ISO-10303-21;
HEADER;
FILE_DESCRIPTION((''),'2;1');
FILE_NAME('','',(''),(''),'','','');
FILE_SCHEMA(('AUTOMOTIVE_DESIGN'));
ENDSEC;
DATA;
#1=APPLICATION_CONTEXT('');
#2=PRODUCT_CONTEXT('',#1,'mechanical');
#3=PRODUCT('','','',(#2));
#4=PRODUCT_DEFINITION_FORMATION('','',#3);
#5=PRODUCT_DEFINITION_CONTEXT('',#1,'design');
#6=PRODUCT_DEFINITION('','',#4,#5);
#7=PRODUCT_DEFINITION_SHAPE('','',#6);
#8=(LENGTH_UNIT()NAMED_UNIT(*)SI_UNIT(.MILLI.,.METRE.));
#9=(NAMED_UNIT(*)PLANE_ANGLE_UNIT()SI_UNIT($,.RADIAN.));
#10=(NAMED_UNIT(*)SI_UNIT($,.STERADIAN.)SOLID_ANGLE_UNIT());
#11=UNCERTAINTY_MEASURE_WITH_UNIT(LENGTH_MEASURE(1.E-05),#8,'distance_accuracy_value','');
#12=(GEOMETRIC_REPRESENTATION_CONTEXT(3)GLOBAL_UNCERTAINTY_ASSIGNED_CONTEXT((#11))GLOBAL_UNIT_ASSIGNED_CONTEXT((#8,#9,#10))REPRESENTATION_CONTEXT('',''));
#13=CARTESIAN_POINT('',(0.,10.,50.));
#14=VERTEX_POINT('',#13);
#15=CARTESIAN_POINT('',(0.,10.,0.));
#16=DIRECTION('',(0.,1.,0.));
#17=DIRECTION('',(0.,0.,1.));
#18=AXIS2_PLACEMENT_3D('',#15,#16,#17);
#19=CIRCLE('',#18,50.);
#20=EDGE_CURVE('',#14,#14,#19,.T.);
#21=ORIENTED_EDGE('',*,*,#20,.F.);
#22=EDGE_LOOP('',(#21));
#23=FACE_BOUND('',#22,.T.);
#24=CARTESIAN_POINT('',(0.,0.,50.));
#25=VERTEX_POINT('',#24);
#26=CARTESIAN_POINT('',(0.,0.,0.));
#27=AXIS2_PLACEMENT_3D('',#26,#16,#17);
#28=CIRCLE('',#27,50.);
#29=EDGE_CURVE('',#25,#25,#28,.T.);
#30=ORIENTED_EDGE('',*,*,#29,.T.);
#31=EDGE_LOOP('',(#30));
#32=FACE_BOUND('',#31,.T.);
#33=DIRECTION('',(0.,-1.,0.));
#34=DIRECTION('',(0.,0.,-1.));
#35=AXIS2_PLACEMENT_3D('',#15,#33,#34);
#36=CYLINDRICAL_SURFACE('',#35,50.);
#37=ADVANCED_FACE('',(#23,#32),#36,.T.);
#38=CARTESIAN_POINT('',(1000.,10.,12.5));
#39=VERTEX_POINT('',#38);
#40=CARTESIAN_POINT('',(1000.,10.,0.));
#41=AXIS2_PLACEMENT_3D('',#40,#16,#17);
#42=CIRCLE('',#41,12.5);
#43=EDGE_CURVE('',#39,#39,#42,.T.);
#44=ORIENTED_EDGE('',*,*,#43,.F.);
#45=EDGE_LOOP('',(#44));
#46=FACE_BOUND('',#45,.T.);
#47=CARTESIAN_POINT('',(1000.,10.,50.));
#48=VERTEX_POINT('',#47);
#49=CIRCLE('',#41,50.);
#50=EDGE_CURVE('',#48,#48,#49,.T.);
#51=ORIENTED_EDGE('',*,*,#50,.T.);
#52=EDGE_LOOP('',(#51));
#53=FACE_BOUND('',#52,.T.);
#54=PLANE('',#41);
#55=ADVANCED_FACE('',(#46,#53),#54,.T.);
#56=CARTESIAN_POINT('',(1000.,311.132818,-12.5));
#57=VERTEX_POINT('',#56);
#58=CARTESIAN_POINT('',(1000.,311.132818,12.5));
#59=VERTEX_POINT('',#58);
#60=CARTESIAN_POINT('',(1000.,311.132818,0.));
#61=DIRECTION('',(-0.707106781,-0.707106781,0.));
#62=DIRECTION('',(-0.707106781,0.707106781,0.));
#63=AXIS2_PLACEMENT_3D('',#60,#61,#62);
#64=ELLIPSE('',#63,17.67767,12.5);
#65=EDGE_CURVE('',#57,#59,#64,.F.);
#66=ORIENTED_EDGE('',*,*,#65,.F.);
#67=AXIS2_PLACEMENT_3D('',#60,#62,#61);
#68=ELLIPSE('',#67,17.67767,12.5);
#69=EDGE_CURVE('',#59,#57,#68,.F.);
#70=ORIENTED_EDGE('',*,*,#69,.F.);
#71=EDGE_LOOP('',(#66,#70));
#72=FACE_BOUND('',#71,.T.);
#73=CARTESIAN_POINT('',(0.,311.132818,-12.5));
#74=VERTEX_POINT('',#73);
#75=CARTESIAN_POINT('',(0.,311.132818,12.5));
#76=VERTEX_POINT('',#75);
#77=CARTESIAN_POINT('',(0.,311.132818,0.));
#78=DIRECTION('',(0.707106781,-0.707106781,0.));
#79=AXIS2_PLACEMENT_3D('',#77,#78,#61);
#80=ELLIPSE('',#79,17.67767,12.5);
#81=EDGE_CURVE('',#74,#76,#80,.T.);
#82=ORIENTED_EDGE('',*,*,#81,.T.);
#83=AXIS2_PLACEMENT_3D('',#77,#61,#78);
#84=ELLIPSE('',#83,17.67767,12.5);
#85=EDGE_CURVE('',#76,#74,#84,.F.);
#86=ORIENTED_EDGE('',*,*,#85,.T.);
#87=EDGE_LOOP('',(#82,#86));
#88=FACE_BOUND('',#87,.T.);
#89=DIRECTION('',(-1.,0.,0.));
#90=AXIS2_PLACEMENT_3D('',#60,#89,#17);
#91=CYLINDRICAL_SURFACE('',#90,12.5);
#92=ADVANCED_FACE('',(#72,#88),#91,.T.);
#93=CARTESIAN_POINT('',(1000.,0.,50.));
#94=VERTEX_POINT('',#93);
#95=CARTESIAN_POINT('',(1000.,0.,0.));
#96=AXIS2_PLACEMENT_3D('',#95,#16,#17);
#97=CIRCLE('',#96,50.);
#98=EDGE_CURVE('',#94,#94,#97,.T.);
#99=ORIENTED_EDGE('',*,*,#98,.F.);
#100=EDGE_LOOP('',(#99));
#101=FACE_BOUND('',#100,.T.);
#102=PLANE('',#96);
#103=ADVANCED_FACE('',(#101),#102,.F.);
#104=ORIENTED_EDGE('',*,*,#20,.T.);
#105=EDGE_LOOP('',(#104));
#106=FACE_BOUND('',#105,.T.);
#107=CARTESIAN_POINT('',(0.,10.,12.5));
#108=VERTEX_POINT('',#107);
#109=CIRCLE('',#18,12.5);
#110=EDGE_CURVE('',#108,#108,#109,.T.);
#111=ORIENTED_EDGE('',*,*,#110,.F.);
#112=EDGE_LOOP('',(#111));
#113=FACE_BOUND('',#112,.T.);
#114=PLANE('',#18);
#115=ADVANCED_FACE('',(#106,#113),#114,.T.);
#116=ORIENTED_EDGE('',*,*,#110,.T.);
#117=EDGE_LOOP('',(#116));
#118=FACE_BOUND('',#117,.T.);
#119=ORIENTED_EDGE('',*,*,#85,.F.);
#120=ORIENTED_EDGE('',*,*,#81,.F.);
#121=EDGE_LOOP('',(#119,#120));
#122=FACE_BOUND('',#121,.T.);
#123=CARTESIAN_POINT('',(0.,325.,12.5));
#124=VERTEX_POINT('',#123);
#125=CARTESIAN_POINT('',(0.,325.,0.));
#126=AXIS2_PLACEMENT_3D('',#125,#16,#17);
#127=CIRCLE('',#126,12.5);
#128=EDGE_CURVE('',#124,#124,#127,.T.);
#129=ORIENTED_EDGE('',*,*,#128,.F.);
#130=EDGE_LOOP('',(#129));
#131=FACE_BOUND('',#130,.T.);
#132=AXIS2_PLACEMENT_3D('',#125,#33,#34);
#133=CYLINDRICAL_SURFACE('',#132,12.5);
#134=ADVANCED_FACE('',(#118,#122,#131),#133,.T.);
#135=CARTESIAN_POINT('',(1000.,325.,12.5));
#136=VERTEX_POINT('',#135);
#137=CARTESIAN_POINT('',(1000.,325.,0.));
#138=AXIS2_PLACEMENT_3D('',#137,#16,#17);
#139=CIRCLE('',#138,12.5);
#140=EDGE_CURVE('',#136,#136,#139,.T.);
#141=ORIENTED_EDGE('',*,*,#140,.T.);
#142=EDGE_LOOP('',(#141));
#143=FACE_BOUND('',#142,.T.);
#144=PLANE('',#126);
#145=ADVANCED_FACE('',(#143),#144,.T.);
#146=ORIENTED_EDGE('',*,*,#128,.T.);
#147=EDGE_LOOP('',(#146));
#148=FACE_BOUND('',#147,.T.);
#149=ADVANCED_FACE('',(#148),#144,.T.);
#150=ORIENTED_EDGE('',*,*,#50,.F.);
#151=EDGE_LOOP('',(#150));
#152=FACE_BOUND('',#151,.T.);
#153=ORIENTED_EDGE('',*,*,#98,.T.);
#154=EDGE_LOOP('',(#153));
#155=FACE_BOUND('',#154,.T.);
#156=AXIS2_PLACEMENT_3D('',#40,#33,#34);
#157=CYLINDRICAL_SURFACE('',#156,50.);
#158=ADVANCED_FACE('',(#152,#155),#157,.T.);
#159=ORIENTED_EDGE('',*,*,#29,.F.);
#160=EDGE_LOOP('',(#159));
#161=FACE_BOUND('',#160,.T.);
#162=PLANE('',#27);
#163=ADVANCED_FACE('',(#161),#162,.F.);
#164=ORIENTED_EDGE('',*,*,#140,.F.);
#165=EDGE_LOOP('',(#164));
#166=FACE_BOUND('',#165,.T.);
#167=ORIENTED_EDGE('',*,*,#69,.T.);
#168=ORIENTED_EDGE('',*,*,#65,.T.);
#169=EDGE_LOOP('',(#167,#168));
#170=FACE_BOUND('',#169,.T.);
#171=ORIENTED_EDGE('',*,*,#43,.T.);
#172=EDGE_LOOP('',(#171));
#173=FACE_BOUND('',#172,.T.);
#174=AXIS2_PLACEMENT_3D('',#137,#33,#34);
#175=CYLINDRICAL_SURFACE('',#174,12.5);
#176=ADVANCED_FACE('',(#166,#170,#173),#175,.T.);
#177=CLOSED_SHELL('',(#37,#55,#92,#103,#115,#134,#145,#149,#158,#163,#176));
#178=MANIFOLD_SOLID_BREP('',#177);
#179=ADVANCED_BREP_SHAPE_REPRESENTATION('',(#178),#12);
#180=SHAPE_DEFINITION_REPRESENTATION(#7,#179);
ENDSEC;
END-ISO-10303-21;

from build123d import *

# Parameters (mm, degrees)
SKETCH_1_R        = 50
EXTRUDE_1_DEPTH   = 10
EXTRUDE_1_2_DEPTH = 10
SKETCH_2_R        = 12.5
EXTRUDE_2_DEPTH   = 315
SKETCH_3_R        = 12.5
EXTRUDE_3_DEPTH   = 1000


with BuildPart() as part:
    # 草图1 → 凸台-拉伸1 (new body)
    with BuildSketch(Plane(origin=(0, 0, 0), x_dir=(1, 0, 0), z_dir=(0, 1, 0))):
        Circle(SKETCH_1_R)
    extrude(amount=EXTRUDE_1_DEPTH)



with BuildPart() as body_2:
    # 草图1 → Extrude 1 2 (new body)
    with BuildSketch(Plane(origin=(0, 0, 0), x_dir=(1, 0, 0), z_dir=(0, 1, 0))):
        with Locations((1000, 0)):
            Circle(SKETCH_1_R)
    extrude(amount=EXTRUDE_1_2_DEPTH)


with BuildPart() as part_1:
    add(part.part)

    add(body_2.part)  # 凸台-拉伸2 merges body 2
    # 草图2 → 凸台-拉伸2 (add)
    with BuildSketch(Plane(origin=(0, 10, 0), x_dir=(1, 0, 0), z_dir=(0, 1, 0))):
        Circle(SKETCH_2_R)
        with Locations((1000, 0)):
            Circle(SKETCH_2_R)
    extrude(amount=EXTRUDE_2_DEPTH)


with BuildPart() as extrude_3_tool:
    # 草图3 → 凸台-拉伸3 (new body)
    with BuildSketch(Plane(origin=(0, 0, 0), x_dir=(0, 0, -1), z_dir=(1, 0, 0))):
        with Locations((0, 311.132818199)):
            Circle(SKETCH_3_R)
    extrude(amount=EXTRUDE_3_DEPTH)


with BuildPart() as part_2:
    add(part_1.part)


with BuildPart() as part_3:
    # 凸台-拉伸3: joined with extrude_3_tool
    add(part_2.part.fuse(extrude_3_tool.part, tol=0.00001))


solid = part_3.part
